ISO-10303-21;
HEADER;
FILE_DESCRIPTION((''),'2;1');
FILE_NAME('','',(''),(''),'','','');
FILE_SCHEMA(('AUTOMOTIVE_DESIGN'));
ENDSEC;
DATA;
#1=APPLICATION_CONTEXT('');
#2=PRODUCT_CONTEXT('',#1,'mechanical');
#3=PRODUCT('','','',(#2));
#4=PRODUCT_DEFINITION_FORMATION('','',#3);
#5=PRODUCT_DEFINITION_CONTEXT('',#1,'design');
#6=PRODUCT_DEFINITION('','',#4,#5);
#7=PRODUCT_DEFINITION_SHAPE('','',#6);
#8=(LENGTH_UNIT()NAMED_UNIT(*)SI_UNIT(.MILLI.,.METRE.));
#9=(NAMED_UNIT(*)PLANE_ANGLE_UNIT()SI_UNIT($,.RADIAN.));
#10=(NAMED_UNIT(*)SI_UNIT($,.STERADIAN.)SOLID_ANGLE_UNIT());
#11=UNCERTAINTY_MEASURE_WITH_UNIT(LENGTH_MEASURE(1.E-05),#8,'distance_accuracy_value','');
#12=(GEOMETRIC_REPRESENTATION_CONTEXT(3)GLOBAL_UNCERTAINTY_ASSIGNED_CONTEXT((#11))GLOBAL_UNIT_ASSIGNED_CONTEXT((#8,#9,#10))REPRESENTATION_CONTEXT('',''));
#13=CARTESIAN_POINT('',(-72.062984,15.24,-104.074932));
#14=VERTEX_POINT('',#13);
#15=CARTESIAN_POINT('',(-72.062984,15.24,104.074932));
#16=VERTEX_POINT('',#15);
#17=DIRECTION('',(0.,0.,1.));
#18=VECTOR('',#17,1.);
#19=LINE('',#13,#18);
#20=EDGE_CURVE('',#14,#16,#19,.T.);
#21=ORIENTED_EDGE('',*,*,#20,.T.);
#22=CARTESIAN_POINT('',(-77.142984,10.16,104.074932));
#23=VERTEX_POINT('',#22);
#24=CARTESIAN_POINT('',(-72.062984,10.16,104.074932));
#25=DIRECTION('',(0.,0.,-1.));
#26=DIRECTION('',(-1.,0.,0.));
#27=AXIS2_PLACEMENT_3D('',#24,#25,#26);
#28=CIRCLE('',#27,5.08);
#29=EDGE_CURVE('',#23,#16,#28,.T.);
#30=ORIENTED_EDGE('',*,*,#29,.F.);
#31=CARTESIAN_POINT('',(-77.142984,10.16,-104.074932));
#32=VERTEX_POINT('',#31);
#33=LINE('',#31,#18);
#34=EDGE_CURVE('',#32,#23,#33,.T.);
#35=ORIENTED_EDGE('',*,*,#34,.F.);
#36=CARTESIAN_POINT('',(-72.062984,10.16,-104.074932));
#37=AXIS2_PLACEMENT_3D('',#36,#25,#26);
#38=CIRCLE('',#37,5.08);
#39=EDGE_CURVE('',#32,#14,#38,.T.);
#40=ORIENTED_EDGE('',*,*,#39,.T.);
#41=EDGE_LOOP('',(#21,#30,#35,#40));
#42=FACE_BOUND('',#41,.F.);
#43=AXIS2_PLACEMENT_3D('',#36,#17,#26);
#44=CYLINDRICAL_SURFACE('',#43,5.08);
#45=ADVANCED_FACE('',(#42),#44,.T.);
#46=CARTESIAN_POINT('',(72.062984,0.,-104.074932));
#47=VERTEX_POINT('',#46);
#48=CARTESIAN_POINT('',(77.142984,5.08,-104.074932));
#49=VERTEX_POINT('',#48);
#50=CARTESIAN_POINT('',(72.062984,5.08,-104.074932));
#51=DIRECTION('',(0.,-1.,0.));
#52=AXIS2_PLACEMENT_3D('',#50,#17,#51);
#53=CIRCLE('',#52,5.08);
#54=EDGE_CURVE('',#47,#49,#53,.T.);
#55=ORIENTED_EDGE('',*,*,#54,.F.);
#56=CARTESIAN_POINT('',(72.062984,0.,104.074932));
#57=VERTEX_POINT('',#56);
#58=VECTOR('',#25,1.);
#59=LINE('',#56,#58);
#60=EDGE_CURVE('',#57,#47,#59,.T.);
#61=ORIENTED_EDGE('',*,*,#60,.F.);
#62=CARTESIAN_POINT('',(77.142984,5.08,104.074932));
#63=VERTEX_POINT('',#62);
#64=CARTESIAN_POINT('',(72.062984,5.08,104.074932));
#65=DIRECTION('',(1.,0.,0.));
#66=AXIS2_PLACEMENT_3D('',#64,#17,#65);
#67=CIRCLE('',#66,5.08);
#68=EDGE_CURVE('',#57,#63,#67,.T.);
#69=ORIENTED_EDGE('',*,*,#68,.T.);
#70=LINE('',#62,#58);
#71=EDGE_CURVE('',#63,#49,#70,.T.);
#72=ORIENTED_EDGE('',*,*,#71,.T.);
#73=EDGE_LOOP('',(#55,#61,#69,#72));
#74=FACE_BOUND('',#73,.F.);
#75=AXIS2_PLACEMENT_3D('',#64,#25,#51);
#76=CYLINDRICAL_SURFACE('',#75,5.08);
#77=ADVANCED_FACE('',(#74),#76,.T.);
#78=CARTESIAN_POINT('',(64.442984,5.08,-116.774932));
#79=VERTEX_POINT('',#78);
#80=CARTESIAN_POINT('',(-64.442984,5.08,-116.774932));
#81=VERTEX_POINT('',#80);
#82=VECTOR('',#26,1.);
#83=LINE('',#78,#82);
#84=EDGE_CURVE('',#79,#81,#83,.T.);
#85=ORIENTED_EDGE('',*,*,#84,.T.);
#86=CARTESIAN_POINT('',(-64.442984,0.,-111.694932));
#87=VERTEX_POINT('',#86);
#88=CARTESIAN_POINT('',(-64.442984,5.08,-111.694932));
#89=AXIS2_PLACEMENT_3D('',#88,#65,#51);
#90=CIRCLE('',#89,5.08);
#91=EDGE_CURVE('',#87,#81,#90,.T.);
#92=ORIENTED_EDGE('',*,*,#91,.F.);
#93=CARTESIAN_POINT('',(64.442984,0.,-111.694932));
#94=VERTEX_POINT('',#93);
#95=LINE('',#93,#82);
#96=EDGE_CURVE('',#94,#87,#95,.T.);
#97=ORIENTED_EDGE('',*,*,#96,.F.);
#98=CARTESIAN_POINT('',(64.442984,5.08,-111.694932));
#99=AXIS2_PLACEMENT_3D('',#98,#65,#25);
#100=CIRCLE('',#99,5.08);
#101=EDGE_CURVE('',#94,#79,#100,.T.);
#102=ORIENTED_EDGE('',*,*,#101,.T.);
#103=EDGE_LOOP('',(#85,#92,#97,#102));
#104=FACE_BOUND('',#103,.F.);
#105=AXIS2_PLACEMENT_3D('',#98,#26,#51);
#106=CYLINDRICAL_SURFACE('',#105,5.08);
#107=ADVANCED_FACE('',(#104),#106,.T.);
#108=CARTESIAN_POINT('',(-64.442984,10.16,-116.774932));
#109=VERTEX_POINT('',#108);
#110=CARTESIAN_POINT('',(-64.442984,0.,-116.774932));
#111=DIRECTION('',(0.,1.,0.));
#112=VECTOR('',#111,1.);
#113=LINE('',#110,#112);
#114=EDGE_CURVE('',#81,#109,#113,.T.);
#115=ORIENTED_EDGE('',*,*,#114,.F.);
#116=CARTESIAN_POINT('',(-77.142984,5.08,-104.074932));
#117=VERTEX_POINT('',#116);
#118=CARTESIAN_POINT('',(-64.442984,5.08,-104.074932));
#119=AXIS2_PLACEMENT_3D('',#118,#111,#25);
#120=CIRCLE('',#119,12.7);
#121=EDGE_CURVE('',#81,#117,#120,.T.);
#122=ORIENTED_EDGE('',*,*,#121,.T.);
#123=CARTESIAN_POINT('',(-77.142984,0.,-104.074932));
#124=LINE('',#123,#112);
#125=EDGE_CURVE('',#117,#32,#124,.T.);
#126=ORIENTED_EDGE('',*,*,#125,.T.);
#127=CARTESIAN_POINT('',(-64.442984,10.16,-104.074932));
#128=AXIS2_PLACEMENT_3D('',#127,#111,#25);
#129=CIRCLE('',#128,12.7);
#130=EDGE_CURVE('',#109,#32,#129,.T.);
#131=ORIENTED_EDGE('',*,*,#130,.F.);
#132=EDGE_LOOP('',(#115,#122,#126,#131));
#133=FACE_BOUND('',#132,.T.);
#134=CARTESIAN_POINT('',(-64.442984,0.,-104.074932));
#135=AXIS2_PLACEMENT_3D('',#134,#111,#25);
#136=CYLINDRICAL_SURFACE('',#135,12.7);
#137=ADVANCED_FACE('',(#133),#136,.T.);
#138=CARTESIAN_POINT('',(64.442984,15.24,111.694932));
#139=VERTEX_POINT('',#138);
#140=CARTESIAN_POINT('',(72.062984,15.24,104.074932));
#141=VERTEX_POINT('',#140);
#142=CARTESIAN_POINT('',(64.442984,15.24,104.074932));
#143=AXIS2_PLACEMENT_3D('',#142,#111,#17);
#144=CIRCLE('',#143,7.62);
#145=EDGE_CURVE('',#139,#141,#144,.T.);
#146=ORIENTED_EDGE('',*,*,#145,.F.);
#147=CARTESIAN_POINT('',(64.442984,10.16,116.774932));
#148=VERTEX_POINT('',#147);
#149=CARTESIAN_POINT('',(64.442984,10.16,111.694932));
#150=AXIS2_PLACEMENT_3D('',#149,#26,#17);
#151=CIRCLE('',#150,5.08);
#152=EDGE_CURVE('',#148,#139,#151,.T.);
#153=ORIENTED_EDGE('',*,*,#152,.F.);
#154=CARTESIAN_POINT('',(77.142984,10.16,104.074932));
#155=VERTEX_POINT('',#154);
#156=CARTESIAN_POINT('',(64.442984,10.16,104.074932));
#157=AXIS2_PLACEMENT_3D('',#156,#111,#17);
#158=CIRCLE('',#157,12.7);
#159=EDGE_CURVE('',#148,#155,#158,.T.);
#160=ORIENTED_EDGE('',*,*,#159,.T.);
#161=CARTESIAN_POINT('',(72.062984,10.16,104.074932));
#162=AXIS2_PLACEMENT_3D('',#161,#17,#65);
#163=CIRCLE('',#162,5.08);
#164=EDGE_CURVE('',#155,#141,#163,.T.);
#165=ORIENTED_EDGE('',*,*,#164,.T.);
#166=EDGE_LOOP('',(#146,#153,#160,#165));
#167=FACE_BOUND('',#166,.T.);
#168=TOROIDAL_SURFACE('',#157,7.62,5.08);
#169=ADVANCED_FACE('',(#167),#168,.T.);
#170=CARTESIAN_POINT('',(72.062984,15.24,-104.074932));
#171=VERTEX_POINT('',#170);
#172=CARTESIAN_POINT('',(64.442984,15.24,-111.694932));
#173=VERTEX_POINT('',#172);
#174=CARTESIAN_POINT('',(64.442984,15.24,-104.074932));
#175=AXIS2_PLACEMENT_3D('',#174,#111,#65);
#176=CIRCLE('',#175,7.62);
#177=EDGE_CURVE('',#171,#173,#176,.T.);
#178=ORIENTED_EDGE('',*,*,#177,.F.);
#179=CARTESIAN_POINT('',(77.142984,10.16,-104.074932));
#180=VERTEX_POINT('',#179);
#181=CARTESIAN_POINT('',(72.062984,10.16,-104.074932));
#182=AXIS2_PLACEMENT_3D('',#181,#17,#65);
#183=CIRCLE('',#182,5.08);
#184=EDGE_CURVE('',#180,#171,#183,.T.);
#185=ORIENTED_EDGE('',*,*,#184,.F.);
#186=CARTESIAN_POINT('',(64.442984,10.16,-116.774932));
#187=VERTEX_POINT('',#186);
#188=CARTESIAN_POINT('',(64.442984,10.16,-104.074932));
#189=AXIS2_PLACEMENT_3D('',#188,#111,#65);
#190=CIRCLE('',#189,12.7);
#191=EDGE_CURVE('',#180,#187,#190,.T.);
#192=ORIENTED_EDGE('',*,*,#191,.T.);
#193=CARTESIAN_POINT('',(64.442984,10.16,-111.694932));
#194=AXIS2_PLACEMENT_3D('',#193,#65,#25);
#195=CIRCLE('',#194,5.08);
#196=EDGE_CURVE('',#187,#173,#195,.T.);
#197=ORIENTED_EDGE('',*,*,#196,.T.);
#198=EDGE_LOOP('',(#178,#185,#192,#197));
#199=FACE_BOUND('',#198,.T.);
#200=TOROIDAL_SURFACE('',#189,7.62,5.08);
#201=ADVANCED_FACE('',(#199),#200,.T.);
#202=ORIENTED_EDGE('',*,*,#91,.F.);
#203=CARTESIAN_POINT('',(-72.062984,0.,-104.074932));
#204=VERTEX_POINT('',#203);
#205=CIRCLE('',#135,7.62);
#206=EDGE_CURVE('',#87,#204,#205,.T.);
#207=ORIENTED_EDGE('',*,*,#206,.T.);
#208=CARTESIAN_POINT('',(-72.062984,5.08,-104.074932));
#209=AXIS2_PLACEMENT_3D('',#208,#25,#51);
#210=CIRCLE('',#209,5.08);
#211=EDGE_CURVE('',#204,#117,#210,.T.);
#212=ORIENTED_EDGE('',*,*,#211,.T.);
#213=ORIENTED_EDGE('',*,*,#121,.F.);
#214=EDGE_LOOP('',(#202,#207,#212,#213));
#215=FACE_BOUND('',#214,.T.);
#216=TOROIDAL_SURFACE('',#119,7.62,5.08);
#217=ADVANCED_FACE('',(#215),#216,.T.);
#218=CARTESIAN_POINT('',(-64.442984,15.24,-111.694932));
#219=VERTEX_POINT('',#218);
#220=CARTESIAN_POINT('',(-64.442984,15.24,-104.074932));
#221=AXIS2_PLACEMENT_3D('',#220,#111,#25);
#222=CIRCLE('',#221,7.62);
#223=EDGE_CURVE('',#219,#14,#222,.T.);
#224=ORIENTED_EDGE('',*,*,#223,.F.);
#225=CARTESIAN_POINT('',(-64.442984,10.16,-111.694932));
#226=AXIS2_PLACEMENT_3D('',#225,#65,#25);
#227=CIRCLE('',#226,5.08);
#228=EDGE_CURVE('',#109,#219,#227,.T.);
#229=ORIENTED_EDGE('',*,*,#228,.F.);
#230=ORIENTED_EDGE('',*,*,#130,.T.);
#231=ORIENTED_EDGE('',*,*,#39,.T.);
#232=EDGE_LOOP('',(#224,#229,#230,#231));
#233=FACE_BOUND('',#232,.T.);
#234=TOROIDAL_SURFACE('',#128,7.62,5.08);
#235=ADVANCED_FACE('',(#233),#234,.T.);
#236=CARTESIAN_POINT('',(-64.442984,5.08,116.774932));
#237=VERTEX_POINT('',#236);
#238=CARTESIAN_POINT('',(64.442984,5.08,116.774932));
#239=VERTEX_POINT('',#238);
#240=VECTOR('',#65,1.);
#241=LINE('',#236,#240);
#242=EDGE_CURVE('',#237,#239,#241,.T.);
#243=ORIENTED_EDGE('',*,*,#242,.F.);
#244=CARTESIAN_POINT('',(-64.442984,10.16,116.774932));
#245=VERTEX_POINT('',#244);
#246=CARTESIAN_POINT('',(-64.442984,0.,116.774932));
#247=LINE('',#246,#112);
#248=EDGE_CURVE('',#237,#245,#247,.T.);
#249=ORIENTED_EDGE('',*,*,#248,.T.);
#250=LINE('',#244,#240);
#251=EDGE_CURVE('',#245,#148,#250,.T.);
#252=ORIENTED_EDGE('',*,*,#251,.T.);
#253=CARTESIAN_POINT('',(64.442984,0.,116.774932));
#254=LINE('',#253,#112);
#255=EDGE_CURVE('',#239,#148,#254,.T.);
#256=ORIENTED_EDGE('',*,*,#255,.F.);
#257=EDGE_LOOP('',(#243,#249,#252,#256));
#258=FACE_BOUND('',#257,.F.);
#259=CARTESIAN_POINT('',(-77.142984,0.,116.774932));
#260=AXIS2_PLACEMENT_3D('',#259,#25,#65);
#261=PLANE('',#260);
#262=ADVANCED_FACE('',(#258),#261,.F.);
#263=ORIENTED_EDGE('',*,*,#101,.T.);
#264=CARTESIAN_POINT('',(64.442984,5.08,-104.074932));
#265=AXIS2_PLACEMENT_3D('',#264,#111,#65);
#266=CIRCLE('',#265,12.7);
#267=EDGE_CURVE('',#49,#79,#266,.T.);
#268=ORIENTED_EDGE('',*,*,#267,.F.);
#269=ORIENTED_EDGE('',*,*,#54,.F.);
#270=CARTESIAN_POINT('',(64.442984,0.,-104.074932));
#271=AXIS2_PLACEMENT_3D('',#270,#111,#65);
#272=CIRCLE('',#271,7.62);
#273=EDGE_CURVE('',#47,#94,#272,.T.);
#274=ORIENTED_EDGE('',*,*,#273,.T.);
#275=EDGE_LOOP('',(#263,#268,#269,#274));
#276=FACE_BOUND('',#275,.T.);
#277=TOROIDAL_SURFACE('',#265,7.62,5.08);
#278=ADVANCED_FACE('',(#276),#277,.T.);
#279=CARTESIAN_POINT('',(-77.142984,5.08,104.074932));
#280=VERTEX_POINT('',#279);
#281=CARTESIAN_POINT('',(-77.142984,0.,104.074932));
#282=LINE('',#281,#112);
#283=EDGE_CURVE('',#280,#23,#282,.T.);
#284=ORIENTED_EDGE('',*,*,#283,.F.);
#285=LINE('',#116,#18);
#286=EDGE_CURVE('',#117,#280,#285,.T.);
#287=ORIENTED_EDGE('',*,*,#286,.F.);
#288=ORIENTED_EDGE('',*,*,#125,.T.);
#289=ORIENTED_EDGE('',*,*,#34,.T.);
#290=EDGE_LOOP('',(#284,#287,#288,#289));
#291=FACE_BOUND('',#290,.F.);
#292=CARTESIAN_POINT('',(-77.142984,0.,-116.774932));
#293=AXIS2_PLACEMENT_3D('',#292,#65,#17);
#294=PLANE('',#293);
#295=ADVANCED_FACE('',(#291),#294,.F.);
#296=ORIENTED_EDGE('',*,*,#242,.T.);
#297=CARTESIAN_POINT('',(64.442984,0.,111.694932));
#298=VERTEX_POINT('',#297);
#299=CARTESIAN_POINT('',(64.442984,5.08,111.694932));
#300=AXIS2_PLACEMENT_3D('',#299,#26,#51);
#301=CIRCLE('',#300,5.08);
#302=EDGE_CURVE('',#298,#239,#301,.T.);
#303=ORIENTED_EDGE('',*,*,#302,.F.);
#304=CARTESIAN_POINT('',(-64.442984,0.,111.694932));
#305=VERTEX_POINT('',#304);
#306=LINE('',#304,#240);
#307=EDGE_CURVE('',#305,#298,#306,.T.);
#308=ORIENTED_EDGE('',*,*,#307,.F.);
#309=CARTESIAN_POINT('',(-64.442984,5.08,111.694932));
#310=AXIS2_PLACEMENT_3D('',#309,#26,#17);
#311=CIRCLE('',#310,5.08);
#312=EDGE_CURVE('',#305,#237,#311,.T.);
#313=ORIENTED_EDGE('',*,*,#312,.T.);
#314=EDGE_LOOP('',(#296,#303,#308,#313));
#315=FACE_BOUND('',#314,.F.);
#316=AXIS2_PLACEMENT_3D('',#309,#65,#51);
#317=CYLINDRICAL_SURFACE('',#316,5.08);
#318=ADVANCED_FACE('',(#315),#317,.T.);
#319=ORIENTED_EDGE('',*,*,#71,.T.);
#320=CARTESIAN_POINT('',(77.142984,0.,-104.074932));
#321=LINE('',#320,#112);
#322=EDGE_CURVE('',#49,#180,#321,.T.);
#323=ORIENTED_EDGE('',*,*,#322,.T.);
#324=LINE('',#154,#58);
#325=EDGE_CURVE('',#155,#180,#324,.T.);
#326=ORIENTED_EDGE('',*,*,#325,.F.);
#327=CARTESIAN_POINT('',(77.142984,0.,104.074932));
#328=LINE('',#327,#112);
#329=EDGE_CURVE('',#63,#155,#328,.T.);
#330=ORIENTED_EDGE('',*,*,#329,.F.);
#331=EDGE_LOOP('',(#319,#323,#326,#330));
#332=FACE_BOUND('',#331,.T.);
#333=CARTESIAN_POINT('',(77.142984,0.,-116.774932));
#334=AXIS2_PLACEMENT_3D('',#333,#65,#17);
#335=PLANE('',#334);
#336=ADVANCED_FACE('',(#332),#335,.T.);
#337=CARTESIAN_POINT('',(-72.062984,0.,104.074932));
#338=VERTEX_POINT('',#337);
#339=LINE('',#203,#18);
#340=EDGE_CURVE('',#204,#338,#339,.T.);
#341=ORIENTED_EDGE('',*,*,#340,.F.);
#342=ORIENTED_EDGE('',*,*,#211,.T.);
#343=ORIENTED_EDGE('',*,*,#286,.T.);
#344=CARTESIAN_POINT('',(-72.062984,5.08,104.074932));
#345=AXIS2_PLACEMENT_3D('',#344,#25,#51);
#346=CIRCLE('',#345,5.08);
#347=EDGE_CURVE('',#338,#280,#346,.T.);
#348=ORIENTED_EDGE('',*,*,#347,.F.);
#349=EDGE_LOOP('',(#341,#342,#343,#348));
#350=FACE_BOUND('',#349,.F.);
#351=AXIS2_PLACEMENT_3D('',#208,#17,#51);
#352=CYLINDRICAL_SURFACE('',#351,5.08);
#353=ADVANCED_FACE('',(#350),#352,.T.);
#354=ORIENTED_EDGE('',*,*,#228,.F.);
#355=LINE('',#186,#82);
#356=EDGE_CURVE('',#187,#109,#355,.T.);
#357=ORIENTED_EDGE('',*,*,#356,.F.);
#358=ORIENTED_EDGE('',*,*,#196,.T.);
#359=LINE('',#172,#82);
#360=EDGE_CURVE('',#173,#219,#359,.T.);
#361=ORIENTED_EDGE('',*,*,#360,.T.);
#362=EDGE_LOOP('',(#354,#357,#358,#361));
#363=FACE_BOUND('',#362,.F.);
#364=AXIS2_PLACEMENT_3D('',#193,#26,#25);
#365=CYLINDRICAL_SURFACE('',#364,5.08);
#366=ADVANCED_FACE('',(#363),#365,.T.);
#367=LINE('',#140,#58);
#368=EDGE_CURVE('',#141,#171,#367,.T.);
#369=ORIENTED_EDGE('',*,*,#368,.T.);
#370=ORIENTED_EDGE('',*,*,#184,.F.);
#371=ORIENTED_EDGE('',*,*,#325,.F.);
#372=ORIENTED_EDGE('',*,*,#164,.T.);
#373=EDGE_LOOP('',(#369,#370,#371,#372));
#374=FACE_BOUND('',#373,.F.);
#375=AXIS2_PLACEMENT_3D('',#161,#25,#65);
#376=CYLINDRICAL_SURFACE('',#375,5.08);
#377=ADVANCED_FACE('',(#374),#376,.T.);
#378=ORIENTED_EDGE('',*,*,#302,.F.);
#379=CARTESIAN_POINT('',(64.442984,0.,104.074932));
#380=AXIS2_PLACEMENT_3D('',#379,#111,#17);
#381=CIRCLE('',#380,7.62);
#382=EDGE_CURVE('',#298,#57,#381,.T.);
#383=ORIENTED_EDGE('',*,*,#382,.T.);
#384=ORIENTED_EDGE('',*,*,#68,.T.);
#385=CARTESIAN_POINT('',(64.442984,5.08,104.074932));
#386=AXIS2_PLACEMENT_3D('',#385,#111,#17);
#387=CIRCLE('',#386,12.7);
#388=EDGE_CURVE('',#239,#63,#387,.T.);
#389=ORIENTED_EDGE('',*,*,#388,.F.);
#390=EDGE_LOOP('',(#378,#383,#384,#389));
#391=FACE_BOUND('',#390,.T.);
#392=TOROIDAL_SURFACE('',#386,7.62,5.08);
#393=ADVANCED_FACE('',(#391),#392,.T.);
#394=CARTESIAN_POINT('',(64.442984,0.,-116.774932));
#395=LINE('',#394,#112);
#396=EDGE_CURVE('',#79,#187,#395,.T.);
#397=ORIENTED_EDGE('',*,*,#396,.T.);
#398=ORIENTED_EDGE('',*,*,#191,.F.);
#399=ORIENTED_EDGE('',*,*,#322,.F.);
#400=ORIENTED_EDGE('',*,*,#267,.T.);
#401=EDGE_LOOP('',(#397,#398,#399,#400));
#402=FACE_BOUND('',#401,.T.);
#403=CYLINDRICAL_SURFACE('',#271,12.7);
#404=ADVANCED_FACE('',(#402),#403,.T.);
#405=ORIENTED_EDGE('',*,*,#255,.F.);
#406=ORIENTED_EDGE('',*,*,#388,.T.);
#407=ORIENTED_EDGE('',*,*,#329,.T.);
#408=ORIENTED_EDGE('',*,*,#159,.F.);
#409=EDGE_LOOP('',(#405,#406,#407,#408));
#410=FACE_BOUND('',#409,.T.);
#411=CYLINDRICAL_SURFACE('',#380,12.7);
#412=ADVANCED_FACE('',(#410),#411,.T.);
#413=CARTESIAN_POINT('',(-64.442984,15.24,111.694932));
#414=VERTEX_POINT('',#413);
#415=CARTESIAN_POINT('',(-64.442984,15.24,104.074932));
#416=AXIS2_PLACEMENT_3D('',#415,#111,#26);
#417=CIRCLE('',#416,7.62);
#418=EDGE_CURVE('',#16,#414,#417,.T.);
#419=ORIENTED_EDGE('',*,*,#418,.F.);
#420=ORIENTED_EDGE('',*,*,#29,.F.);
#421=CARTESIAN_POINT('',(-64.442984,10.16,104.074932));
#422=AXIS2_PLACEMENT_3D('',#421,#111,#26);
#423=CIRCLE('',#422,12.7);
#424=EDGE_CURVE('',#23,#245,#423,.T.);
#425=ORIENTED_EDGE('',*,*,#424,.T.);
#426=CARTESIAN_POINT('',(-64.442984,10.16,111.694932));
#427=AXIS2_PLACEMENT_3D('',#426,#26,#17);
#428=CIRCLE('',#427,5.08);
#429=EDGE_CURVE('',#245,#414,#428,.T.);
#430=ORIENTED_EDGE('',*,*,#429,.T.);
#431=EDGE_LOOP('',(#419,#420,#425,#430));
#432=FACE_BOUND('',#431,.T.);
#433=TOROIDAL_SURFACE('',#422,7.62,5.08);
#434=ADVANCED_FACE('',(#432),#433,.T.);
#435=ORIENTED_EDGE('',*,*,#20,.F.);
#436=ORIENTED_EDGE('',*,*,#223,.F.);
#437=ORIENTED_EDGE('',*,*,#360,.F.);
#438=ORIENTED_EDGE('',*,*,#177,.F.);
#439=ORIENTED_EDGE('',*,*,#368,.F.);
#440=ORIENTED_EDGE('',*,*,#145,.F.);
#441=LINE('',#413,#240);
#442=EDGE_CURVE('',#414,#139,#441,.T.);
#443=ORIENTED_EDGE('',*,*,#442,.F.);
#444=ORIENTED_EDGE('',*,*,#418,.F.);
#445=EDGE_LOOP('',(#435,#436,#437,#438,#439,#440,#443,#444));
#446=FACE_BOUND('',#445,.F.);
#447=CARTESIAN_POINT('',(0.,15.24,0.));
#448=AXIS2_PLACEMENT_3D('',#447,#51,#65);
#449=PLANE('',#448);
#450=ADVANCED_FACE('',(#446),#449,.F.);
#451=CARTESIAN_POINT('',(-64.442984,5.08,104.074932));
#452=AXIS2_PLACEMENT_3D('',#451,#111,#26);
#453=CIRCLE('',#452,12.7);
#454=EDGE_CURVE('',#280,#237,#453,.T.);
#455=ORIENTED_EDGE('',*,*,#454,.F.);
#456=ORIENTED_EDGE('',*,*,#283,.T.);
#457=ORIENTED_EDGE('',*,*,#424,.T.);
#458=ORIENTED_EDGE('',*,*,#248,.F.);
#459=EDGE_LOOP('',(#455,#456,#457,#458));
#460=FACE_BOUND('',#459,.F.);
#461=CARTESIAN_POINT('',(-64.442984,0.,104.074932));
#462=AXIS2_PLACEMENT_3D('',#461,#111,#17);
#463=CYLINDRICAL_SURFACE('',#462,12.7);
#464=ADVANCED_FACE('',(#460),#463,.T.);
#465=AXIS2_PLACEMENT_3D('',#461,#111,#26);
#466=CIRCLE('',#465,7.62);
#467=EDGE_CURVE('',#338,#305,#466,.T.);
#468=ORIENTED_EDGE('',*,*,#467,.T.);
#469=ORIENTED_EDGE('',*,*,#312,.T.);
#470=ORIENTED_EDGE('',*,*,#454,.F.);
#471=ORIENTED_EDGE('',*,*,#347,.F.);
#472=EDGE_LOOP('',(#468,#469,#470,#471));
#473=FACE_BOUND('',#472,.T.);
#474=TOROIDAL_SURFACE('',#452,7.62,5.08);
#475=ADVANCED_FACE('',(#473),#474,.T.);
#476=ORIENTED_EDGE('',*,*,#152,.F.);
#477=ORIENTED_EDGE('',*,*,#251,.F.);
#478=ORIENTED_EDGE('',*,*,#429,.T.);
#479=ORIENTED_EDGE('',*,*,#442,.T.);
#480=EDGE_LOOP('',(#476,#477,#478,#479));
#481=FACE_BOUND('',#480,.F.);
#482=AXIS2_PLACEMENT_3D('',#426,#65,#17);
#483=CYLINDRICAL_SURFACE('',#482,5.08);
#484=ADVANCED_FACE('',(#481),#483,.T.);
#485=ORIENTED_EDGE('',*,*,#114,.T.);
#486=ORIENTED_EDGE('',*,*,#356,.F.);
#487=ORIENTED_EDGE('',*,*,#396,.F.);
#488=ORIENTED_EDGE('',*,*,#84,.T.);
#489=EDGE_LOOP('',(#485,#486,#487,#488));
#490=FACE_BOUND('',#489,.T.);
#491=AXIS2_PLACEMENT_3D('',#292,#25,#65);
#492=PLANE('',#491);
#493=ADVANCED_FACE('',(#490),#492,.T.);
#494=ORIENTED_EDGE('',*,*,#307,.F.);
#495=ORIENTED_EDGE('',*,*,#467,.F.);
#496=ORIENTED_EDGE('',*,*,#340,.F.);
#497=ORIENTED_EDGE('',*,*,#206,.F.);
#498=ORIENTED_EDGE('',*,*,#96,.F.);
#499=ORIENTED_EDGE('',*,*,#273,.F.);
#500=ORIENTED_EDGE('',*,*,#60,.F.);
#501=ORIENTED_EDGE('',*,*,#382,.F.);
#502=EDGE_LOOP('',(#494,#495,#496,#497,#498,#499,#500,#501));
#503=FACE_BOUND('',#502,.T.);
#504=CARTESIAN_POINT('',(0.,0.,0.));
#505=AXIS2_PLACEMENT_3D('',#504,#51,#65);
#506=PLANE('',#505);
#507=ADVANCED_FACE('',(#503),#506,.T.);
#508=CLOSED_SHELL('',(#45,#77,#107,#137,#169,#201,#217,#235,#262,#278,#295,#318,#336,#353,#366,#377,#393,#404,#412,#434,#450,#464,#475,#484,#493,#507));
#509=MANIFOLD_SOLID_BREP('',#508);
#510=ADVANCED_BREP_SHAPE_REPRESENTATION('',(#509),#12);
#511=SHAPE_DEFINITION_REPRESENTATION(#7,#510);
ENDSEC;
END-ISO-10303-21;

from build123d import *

# Parameters (mm, degrees)
F0_W     = 154.28596735
F0_H     = 233.5498631001
F2_DEPTH = 15.24
F3_DEPTH = 15.24
F4_R     = 12.7
F6_R     = 12.7
F7_R     = 12.7
F8_R     = 12.7
F9_R     = 5.08


# Not quite as in the source:
# - the program builds the solid bodies; features that only make, move or delete a surface that nothing else refers to are left out


with BuildPart() as f2:
    # F0 (on Front) → F2 (new body)
    with BuildSketch(Plane.XZ):
        Rectangle(F0_W, F0_H)
    extrude(amount=-F2_DEPTH)

    # F3 (add): a face of the model
    f3_faces = [f2.faces().sort_by_distance(p)[0] for p in [
        (0, 15.24, 0),
    ]]
    extrude(f3_faces, amount=-F3_DEPTH)

    # F4
    f4_edges = [f2.edges().sort_by_distance(p)[0] for p in [
        (77.142984, 7.62, 116.774932),
    ]]
    fillet(f4_edges, radius=F4_R)

    # F6
    f6_edges = [f2.edges().sort_by_distance(p)[0] for p in [
        (-77.142984, 7.62, 116.774932),
    ]]
    fillet(f6_edges, radius=F6_R)

    # F7
    f7_edges = [f2.edges().sort_by_distance(p)[0] for p in [
        (77.142984, 7.62, -116.774932),
    ]]
    fillet(f7_edges, radius=F7_R)

    # F8
    f8_edges = [f2.edges().sort_by_distance(p)[0] for p in [
        (-77.142984, 7.62, -116.774932),
    ]]
    fillet(f8_edges, radius=F8_R)

    # F9
    f9_edges = [f2.edges().sort_by_distance(p)[0] for p in [
        (-77.142984, 15.24, 0),
        (-77.142984, 0, 0),
        (77.142984, 0, 0),
        (77.142984, 15.24, 0),
        (0, 0, 116.774932),
        (0, 15.24, 116.774932),
        (0, 15.24, -116.774932),
        (0, 0, -116.774932),
    ]]
    fillet(f9_edges, radius=F9_R)


solid = f2.part
